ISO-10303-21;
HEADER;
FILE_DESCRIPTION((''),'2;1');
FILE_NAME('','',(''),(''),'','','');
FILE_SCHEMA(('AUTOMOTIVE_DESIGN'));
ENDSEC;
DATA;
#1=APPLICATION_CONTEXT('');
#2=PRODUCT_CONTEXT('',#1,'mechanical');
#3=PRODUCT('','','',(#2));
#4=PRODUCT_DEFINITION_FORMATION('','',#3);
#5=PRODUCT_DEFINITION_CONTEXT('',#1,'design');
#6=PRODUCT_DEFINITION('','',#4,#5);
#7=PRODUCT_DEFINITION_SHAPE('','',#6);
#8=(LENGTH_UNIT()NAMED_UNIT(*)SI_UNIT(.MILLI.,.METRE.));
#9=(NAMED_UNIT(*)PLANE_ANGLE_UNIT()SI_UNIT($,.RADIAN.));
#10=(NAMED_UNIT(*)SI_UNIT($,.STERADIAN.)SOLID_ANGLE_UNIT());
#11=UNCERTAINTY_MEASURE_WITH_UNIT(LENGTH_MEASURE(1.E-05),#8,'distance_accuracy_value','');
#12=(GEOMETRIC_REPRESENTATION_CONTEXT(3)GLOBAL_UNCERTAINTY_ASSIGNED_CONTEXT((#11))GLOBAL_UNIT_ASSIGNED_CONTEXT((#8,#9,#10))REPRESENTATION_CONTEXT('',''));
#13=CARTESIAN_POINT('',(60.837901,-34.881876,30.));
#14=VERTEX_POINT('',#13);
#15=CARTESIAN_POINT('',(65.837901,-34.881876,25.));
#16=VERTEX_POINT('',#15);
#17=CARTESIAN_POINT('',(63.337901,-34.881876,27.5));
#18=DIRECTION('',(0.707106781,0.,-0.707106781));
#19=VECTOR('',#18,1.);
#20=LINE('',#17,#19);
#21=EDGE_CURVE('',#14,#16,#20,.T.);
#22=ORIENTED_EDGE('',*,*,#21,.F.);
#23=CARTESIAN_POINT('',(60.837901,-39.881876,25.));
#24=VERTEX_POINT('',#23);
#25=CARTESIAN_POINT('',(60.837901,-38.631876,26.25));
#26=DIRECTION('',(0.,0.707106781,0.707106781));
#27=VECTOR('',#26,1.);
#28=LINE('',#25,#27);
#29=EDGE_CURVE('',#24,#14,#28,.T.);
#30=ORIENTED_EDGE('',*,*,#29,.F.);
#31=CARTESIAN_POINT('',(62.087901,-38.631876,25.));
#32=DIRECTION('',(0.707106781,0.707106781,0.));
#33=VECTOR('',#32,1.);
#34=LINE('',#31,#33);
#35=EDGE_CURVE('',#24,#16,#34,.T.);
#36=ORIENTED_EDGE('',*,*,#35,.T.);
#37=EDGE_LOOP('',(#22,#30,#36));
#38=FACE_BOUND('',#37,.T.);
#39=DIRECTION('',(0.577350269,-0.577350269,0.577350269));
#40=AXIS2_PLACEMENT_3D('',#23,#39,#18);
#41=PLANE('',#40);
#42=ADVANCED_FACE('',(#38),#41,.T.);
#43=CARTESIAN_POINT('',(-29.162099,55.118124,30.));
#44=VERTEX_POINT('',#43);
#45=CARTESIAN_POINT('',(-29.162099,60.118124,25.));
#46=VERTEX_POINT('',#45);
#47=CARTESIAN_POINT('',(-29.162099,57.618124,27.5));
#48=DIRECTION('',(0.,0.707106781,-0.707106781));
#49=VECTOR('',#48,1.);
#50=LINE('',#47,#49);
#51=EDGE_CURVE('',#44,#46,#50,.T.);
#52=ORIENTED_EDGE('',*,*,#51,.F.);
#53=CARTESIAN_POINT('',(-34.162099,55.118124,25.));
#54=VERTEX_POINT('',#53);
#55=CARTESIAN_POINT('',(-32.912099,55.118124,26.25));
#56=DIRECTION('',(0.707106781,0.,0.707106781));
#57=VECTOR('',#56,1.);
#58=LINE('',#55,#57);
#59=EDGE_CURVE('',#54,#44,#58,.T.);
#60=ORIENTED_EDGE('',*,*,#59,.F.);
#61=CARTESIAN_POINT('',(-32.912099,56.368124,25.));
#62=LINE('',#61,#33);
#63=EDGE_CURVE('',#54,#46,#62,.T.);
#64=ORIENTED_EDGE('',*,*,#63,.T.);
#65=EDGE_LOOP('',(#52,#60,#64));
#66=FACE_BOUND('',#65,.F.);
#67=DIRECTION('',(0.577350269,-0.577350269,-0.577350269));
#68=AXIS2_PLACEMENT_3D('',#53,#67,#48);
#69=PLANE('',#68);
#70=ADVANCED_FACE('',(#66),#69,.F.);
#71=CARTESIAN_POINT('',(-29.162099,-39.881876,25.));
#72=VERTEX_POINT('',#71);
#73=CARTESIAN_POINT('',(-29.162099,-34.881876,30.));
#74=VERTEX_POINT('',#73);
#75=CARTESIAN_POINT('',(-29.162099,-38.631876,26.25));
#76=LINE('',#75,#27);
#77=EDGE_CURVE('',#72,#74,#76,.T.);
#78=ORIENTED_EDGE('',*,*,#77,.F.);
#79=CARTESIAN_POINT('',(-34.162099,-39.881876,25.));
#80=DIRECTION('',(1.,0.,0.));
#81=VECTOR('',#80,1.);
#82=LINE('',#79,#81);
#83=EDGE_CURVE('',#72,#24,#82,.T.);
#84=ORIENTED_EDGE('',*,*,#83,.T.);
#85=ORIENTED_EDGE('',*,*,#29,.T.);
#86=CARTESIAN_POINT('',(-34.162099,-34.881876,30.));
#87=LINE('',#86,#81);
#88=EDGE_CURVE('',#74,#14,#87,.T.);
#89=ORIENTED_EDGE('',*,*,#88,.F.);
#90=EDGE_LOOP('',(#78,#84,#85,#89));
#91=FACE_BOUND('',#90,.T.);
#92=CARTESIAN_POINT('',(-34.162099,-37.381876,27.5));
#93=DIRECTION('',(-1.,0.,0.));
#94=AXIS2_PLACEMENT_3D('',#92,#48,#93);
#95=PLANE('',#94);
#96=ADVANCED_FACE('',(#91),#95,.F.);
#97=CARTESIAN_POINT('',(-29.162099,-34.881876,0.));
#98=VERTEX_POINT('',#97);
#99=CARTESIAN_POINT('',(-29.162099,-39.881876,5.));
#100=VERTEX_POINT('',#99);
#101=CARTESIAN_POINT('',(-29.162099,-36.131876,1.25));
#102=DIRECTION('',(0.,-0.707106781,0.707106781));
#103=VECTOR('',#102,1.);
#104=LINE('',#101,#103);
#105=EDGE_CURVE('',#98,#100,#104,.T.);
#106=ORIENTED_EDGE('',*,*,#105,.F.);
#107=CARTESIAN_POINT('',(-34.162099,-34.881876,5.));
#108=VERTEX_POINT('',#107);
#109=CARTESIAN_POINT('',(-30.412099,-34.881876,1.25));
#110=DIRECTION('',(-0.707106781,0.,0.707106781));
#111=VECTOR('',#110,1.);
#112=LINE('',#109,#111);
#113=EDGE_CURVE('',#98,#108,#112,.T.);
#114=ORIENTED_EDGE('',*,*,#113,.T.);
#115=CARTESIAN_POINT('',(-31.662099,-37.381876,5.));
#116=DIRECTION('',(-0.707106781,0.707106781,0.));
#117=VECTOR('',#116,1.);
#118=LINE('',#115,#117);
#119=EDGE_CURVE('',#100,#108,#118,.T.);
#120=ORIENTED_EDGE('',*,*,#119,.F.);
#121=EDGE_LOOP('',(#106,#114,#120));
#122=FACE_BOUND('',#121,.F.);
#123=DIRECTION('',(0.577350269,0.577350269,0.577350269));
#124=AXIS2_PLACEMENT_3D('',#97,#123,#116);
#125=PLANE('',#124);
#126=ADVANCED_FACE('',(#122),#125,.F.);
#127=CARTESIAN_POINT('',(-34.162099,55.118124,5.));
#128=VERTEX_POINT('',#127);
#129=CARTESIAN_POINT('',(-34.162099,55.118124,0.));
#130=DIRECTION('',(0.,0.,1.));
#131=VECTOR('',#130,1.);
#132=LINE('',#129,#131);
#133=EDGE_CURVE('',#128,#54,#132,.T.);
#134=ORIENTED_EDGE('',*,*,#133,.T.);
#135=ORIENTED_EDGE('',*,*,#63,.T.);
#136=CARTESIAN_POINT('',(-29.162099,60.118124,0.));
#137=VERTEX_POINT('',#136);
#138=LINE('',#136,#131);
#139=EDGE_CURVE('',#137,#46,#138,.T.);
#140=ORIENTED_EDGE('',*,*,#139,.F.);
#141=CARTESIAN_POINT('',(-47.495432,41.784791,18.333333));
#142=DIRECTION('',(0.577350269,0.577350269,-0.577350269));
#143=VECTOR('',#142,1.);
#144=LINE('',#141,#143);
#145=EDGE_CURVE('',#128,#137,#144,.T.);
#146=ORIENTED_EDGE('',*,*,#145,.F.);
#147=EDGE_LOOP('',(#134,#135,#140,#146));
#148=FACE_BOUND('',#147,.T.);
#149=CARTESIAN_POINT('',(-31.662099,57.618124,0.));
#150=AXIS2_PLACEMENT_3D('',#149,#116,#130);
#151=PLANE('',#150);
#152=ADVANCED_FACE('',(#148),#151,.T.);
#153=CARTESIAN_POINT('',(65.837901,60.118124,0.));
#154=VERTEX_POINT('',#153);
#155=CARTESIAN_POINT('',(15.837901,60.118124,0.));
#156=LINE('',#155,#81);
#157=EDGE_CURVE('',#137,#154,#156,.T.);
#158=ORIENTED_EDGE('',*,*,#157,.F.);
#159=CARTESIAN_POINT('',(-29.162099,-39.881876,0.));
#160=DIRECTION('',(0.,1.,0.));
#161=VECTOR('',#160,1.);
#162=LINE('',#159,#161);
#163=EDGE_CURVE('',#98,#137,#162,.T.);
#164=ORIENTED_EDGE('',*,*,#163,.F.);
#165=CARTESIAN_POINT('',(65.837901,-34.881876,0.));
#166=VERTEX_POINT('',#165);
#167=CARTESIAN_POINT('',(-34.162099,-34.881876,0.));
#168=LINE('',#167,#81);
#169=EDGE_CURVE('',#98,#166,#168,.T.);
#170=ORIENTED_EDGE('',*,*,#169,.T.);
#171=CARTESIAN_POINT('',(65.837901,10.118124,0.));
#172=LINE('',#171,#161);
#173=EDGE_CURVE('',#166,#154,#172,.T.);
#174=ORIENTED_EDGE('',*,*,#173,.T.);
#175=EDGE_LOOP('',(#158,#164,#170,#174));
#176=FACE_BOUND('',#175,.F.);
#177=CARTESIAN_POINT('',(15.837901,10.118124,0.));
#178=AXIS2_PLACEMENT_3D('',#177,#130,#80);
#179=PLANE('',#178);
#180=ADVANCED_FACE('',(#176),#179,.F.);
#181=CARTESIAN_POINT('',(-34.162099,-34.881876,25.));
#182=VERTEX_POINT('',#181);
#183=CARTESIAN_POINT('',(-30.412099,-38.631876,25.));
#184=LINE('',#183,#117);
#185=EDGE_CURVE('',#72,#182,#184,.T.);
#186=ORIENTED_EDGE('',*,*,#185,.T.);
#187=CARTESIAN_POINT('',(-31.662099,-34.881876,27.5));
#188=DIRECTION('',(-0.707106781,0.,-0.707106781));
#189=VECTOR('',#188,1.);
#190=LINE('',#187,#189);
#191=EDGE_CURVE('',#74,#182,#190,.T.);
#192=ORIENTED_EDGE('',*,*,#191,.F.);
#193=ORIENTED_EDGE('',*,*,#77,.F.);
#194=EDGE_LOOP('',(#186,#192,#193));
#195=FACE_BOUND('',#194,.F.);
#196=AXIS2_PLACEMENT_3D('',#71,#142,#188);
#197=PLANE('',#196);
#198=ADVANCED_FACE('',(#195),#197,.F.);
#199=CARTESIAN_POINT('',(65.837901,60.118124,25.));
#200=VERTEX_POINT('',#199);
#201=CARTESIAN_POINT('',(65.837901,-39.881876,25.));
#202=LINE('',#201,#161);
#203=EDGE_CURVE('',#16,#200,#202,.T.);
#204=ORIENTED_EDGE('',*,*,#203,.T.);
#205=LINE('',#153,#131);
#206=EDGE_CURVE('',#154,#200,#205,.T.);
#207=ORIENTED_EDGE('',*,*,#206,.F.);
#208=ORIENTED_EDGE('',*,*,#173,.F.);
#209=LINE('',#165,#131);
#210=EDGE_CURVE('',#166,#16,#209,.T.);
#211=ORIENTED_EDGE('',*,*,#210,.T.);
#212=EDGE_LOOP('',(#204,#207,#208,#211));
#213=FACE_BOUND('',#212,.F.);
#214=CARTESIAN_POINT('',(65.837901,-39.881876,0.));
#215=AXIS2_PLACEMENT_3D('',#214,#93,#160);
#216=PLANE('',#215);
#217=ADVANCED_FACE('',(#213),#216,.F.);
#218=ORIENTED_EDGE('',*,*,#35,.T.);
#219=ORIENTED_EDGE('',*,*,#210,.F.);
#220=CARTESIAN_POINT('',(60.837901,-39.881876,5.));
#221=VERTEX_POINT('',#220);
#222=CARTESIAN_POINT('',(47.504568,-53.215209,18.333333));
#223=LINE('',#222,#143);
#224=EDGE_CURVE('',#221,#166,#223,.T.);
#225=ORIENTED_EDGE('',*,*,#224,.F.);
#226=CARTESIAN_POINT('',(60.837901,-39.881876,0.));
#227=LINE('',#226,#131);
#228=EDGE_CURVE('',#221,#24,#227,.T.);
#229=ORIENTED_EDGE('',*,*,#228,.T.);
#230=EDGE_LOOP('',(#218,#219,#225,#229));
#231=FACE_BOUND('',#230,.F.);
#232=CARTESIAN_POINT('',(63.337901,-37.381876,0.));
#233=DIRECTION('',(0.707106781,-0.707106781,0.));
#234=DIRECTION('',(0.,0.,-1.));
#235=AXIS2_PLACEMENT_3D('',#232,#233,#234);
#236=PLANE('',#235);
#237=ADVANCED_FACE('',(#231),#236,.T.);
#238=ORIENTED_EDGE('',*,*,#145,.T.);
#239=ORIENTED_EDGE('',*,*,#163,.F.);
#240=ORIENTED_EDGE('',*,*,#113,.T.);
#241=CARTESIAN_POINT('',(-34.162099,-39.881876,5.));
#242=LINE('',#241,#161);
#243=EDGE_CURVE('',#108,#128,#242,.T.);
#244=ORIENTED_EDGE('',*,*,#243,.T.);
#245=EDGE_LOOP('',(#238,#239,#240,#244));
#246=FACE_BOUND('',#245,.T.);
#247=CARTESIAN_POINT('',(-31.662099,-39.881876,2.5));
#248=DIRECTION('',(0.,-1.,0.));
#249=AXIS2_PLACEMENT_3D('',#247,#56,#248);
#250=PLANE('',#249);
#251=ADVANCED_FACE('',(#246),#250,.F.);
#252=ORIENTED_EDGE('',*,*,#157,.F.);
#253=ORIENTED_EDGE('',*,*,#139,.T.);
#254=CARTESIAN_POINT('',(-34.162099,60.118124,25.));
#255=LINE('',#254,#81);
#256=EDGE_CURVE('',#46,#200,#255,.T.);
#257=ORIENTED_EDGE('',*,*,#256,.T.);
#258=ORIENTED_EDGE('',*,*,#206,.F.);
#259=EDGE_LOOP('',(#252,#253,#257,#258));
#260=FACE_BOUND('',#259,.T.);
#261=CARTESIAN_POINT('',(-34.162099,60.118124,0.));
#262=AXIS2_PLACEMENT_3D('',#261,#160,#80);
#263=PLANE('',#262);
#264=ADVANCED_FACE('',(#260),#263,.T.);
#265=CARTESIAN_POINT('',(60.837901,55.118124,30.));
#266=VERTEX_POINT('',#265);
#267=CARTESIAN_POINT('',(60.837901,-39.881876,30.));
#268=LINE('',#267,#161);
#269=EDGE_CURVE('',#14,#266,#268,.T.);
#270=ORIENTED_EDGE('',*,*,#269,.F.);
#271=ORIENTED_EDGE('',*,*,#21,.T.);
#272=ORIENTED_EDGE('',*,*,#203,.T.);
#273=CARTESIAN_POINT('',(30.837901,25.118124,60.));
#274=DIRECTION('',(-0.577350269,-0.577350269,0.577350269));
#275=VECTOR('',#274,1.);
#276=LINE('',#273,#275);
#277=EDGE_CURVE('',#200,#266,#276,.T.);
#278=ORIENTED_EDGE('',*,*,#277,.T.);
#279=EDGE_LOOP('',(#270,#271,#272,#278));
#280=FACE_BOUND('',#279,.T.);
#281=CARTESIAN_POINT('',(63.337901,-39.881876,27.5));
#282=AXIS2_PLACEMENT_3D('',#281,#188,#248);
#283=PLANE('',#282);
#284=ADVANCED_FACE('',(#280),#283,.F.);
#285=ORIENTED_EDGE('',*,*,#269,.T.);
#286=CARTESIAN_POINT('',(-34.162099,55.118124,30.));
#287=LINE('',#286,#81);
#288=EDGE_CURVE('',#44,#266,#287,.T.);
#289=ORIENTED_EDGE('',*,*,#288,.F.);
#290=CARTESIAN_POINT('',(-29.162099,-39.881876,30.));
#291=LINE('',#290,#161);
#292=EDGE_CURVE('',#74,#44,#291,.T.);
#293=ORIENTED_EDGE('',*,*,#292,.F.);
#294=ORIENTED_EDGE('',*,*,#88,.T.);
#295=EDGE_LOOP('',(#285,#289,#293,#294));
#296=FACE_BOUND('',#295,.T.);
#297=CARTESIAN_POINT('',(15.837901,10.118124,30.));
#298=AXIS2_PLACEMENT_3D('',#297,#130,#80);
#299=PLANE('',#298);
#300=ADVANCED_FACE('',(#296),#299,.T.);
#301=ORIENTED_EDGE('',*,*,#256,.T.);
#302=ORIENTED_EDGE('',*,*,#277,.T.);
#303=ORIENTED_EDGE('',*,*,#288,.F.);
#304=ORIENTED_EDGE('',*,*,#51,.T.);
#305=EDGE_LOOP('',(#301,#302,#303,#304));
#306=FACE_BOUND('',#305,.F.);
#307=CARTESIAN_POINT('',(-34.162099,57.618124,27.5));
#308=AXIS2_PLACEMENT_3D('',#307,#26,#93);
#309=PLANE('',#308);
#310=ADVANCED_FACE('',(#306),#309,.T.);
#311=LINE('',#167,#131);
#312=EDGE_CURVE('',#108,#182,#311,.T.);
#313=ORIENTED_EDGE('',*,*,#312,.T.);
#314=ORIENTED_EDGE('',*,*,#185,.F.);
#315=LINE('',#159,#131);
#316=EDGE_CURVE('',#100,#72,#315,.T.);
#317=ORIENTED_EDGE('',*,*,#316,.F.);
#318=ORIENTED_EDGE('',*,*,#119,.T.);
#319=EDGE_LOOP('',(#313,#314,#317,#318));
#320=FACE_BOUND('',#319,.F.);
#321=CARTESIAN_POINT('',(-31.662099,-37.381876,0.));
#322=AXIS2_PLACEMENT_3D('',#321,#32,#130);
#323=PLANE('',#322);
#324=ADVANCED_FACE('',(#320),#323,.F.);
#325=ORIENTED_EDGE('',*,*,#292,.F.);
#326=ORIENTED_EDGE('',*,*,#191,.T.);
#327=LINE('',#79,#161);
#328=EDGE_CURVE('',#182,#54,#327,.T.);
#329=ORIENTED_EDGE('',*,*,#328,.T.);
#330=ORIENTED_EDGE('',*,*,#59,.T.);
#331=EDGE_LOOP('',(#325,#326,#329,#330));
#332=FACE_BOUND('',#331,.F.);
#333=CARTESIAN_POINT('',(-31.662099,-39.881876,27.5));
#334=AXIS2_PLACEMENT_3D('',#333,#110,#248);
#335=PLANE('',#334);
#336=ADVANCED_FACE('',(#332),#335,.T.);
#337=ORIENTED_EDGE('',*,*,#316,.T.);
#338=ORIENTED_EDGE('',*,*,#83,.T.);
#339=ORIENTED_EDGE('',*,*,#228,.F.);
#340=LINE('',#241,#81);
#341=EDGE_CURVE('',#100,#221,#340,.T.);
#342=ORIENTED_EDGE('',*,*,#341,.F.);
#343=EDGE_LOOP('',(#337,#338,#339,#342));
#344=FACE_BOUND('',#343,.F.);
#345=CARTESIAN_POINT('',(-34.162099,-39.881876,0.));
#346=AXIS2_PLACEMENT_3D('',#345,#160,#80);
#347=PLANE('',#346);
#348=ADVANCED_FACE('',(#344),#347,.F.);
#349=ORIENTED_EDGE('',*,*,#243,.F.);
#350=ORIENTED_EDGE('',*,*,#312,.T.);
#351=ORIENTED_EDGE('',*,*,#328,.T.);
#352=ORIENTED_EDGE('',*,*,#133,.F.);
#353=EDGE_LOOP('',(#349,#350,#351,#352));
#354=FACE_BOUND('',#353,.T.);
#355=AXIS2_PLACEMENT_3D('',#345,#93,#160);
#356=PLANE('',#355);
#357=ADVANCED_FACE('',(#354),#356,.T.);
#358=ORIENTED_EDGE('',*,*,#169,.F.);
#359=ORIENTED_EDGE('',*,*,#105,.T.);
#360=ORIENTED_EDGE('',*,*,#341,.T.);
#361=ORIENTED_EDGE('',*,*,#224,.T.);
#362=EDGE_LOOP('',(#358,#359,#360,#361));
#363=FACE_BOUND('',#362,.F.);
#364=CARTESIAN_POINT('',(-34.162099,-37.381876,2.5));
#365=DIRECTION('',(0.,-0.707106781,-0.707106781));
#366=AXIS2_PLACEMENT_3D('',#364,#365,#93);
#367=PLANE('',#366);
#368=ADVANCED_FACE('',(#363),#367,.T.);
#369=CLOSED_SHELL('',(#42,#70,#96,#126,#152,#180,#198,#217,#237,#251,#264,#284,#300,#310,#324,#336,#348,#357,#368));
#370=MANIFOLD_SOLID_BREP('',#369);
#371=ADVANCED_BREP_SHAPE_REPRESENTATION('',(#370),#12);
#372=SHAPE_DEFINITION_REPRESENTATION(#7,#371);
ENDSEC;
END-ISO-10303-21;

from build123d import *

# Parameters (mm, degrees)
F0_W     = 100
F0_H     = 100
F1_DEPTH = 30
F4_SIZE  = 5


# Not quite as in the source:
# - the program builds the solid bodies; features that only make, move or delete a surface that nothing else refers to are left out


with BuildPart() as f1:
    # F0 (on Top) → F1 (new body)
    with BuildSketch(Plane.XY):
        with Locations((15.8379010856, 10.1181242615)):
            Rectangle(F0_W, F0_H)
    extrude(amount=F1_DEPTH)

    # F4
    f4_edges = [f1.edges().sort_by_distance(p)[0] for p in [
        (65.837901, 10.118124, 30),
        (15.837901, 60.118124, 30),
        (-34.162099, 10.118124, 30),
        (15.837901, -39.881876, 30),
        (-34.162099, -39.881876, 15),
        (65.837901, -39.881876, 15),
        (15.837901, -39.881876, 0),
        (-34.162099, 60.118124, 15),
        (-34.162099, 10.118124, 0),
    ]]
    chamfer(f4_edges, length=F4_SIZE)


solid = f1.part
